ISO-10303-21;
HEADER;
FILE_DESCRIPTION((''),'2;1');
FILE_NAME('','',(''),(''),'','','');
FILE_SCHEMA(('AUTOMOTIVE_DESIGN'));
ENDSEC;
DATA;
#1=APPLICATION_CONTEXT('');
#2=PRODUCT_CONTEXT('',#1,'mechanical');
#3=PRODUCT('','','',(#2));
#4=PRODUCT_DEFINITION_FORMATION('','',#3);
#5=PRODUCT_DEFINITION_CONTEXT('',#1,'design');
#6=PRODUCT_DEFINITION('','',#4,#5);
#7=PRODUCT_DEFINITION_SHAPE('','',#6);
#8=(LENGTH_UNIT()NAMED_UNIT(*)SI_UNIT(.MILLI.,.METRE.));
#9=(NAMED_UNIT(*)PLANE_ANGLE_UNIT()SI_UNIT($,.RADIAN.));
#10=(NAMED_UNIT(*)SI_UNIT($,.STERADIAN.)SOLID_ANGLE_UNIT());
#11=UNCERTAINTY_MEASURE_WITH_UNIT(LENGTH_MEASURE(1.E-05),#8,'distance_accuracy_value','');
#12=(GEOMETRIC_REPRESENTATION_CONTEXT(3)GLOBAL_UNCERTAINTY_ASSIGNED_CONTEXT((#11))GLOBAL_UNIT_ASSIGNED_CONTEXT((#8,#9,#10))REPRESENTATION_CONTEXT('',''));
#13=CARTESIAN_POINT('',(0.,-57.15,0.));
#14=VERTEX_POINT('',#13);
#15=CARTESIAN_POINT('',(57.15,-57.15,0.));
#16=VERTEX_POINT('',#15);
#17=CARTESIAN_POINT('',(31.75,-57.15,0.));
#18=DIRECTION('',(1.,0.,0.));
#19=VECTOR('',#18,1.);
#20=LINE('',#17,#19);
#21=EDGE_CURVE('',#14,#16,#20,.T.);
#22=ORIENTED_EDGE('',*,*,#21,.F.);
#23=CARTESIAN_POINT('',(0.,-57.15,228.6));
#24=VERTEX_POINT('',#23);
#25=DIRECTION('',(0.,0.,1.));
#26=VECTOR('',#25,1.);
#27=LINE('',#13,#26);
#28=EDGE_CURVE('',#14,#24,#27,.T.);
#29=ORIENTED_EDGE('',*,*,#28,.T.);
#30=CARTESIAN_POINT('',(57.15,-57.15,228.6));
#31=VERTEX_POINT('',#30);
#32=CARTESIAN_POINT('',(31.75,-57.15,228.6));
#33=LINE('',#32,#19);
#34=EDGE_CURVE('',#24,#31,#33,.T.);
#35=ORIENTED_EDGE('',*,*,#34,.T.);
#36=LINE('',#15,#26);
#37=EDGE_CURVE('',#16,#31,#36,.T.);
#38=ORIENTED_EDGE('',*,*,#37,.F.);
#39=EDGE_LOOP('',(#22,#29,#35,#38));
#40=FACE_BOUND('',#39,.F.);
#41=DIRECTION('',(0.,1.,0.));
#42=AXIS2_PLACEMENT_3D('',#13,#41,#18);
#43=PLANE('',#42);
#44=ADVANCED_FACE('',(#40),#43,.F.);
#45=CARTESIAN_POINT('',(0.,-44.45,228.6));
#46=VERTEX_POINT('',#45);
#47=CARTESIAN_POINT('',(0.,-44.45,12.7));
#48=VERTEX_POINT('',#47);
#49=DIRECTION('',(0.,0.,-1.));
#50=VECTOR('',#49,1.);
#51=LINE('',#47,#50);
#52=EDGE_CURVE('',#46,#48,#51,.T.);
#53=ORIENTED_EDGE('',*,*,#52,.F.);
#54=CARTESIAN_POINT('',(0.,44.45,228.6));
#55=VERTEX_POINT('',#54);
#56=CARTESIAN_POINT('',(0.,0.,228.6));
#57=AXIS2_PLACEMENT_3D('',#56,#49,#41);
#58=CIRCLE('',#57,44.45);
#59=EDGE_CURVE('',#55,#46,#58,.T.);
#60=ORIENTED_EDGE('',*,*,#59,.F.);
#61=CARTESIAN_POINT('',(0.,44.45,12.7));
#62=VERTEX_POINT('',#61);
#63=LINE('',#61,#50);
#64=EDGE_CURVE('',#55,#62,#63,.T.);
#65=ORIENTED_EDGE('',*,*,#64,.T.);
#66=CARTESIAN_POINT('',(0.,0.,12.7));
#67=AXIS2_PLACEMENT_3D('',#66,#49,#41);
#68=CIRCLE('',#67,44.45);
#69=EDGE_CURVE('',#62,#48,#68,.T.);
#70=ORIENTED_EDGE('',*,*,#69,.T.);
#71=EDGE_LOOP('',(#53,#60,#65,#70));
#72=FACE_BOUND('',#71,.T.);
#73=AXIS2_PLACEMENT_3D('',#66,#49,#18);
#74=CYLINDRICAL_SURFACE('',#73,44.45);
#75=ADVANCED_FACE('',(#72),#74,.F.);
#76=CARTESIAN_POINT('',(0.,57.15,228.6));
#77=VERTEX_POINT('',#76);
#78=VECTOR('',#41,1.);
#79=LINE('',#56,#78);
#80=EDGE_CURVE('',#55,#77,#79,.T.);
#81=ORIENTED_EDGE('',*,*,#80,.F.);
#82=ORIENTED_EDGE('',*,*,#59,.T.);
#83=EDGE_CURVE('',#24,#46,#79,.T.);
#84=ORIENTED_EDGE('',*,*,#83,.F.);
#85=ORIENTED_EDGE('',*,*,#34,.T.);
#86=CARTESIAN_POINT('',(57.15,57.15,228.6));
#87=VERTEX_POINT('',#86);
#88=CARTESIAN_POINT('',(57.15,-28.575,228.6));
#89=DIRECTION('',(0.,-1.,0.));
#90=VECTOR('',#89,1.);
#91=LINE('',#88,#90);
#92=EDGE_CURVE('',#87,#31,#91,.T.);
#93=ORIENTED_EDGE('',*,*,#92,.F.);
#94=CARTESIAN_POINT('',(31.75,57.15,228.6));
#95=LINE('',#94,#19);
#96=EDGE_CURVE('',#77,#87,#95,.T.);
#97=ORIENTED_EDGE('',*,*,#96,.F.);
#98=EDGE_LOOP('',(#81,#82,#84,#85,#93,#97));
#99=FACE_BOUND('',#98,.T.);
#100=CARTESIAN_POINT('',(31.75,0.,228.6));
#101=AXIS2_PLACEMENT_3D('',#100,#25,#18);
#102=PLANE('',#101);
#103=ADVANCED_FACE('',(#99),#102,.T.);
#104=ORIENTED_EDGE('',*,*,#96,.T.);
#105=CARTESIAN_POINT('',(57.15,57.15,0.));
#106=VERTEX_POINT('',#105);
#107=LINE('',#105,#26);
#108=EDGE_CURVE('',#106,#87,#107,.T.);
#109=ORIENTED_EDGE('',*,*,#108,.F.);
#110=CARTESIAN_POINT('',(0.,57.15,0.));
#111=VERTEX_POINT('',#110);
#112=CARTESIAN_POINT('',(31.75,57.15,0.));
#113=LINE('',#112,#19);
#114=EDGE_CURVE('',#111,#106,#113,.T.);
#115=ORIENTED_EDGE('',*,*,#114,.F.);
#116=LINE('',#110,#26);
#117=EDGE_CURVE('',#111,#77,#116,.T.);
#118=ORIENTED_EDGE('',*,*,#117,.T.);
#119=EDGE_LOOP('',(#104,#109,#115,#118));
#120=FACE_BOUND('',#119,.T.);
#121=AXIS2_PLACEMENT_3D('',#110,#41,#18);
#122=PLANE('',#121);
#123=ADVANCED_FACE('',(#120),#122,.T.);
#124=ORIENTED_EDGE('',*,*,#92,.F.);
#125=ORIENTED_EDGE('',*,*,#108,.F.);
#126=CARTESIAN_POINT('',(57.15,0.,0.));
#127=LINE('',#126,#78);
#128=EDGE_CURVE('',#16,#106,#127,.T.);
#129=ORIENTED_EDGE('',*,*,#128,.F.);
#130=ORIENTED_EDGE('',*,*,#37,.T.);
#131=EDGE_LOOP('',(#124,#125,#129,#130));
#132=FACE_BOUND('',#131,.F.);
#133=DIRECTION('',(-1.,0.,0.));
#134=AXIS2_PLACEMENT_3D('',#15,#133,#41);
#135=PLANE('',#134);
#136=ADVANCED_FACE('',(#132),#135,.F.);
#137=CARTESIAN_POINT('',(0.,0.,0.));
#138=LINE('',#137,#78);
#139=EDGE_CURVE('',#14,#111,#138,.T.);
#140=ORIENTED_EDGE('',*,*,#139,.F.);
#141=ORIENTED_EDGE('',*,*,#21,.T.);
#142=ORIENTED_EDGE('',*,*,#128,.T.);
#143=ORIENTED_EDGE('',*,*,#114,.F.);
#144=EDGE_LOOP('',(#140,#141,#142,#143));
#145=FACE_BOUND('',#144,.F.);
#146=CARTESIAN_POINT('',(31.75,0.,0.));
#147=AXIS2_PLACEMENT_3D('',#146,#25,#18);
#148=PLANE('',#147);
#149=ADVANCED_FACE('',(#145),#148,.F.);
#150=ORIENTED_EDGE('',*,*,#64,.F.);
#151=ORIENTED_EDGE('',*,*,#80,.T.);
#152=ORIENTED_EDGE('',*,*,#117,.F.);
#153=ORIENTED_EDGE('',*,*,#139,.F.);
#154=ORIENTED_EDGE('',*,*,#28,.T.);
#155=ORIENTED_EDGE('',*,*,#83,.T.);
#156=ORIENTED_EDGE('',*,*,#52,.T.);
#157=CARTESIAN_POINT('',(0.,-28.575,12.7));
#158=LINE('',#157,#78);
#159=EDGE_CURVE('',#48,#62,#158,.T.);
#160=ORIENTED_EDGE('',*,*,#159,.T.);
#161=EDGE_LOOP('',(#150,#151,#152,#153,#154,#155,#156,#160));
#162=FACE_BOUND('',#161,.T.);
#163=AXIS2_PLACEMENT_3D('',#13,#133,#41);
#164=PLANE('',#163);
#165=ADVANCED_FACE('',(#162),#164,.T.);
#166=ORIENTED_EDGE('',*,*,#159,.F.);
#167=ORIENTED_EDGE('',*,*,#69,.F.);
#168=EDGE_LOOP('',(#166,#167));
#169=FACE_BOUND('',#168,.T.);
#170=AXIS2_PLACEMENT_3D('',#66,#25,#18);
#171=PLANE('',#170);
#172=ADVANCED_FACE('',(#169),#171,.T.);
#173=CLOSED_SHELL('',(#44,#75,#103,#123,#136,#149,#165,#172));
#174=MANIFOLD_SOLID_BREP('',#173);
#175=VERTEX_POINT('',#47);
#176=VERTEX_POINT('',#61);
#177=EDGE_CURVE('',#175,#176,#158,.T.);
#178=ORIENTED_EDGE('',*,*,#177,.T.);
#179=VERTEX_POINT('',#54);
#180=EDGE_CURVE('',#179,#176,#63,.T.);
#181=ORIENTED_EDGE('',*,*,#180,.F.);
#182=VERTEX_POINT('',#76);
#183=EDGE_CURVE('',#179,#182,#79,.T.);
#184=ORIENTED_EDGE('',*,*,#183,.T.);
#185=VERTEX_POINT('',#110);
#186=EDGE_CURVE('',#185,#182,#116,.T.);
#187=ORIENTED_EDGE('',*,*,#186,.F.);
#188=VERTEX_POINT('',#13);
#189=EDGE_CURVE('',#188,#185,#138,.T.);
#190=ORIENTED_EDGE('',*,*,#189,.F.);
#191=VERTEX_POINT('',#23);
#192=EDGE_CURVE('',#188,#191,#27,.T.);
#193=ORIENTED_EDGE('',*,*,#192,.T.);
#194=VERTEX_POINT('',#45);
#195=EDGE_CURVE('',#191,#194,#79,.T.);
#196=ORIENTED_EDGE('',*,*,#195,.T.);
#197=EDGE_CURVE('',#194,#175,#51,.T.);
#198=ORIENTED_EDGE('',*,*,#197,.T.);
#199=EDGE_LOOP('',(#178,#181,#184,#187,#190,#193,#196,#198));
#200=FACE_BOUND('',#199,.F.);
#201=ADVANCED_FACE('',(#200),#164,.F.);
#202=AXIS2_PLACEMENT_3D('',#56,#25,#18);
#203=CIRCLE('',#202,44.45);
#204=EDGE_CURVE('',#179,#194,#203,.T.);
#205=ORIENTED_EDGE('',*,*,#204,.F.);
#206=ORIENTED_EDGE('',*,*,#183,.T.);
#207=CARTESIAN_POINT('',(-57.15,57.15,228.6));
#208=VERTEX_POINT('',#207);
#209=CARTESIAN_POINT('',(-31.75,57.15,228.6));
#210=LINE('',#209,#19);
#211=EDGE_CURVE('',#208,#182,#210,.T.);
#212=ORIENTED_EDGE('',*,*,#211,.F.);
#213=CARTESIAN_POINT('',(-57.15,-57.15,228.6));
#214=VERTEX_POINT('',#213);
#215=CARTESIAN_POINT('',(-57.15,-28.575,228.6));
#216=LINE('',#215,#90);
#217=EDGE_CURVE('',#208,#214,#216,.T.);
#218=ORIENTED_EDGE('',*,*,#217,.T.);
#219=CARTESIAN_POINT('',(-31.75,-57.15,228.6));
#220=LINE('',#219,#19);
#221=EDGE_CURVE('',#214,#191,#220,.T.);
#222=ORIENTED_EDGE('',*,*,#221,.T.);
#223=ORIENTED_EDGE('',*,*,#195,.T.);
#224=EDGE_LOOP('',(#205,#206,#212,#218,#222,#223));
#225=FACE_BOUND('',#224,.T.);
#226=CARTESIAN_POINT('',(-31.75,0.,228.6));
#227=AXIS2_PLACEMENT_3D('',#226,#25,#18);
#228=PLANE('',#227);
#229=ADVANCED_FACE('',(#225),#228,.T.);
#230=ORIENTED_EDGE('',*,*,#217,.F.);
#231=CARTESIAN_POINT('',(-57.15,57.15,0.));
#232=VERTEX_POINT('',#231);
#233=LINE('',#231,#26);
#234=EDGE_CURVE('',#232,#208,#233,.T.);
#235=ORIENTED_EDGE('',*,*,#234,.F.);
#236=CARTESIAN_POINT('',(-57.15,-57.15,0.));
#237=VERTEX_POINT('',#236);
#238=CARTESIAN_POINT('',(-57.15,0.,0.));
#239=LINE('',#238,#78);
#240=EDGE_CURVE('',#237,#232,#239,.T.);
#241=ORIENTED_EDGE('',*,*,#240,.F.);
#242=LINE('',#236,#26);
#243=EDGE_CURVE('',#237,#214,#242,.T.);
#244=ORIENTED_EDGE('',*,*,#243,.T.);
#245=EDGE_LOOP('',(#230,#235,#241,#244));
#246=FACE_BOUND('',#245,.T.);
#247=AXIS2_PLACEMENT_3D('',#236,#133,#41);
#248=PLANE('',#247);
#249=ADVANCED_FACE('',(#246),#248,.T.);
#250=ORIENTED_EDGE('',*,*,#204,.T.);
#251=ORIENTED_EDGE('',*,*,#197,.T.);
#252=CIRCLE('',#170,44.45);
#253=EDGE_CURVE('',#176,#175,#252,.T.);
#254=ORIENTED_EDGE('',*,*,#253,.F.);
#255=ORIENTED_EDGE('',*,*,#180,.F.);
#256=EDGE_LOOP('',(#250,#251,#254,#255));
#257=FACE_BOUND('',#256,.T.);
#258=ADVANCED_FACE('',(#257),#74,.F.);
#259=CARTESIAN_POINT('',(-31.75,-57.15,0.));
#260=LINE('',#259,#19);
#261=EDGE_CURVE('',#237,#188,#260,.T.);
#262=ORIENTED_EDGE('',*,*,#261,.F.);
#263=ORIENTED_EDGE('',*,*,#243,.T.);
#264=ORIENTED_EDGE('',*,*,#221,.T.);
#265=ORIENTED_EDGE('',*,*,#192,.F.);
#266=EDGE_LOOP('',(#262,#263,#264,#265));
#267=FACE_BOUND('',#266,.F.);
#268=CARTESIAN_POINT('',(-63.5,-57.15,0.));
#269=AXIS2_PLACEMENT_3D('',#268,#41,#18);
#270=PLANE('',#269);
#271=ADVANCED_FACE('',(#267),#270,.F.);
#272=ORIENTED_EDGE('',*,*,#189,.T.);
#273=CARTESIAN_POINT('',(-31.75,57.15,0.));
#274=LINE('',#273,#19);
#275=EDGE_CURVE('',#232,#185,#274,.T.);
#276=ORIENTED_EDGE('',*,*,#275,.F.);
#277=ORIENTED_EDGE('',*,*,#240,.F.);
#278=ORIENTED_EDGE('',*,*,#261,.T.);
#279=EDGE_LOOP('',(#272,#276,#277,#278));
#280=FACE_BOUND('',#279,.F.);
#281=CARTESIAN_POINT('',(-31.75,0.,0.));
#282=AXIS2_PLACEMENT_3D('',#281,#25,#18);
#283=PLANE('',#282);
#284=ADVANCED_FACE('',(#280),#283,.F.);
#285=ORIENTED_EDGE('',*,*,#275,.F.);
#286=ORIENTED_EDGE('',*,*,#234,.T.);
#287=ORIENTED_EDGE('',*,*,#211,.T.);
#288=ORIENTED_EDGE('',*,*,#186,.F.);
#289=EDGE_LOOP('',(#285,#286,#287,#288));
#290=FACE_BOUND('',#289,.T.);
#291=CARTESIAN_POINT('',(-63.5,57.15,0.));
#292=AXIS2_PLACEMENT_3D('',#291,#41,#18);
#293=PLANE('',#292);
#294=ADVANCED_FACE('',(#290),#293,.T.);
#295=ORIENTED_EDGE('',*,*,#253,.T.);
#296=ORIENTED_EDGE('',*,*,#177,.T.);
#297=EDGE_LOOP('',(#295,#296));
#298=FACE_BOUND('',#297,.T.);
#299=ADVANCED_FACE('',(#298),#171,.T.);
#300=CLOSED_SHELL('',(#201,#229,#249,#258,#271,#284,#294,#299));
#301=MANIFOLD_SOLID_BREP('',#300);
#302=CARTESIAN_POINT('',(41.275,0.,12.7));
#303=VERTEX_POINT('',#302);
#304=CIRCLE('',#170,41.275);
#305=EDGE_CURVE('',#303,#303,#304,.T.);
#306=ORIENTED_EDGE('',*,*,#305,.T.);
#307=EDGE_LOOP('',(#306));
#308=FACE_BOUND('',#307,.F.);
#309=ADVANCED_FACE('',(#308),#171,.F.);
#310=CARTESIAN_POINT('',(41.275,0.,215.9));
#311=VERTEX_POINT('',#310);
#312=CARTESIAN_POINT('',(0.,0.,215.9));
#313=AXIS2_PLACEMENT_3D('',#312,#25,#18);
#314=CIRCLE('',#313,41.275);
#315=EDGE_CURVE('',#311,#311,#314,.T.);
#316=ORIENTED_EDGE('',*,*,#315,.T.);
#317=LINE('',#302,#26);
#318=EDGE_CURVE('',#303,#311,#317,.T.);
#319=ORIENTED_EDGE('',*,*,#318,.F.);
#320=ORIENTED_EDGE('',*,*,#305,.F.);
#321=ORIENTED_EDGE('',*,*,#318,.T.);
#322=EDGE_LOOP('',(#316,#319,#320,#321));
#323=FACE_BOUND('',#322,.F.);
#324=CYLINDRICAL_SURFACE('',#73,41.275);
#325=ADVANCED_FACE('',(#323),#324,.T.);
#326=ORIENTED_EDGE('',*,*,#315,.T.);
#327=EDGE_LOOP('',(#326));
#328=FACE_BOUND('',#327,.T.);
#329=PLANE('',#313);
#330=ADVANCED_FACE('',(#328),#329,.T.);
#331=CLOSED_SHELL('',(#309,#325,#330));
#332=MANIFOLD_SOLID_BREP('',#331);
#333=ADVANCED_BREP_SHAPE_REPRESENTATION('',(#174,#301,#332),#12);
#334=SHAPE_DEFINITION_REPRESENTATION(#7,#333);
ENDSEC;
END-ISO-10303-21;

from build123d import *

# Parameters (mm, degrees)
F0_W     = 63.5
F0_H     = 114.3
F1_DEPTH = 228.6
F2_DEPTH = 228.6
F4_R     = 41.275
F5_DEPTH = 203.2
F4_R_2   = 44.45
F6_DEPTH = 215.9
F7_W     = 6.35
F7_H     = 114.3
F8_DEPTH = 228.601


with BuildPart() as f1:
    # F0 (on Top) → F1 (new body)
    with BuildSketch(Plane.XY):
        with Locations((-31.75, 0)):
            Rectangle(F0_W, F0_H)
    extrude(amount=F1_DEPTH)


with BuildPart() as f2:
    # F0 (on Top) → F2 (new body)
    with BuildSketch(Plane.XY):
        with Locations((31.75, 0)):
            Rectangle(F0_W, F0_H)
    extrude(amount=F2_DEPTH)


with BuildPart() as f5:
    # F4 (on offset) → F5 (new body)
    with BuildSketch(Plane.XY.offset(12.7)):
        Circle(F4_R)
    extrude(amount=F5_DEPTH)


with BuildPart() as f6_tool:
    # F4 (on offset) → F6 (new body, through all)
    with BuildSketch(Plane.XY.offset(12.7)):
        Circle(F4_R_2)
        Circle(F4_R, mode=Mode.SUBTRACT)
        Circle(F4_R)
    extrude(amount=F6_DEPTH)


with BuildPart() as f1_1:
    add(f1.part)

    # F6: cut by f6_tool
    add(f6_tool.part, mode=Mode.SUBTRACT)


with BuildPart() as f2_1:
    add(f2.part)

    # F6: cut by f6_tool
    add(f6_tool.part, mode=Mode.SUBTRACT)


with BuildPart() as f8_tool:
    # F7 (on Top) → F8 (new body, through all)
    with BuildSketch(Plane.XY):
        with Locations((-60.325, 0)):
            Rectangle(F7_W, F7_H)
        with Locations((60.325, 0)):
            Rectangle(F7_W, F7_H)
    extrude(amount=F8_DEPTH)


with BuildPart() as f1_2:
    add(f1_1.part)

    # F8: cut by f8_tool
    add(f8_tool.part, mode=Mode.SUBTRACT)


with BuildPart() as f2_2:
    add(f2_1.part)

    # F8: cut by f8_tool
    add(f8_tool.part, mode=Mode.SUBTRACT)


solid = Compound([f5.part, f1_2.part, f2_2.part])
